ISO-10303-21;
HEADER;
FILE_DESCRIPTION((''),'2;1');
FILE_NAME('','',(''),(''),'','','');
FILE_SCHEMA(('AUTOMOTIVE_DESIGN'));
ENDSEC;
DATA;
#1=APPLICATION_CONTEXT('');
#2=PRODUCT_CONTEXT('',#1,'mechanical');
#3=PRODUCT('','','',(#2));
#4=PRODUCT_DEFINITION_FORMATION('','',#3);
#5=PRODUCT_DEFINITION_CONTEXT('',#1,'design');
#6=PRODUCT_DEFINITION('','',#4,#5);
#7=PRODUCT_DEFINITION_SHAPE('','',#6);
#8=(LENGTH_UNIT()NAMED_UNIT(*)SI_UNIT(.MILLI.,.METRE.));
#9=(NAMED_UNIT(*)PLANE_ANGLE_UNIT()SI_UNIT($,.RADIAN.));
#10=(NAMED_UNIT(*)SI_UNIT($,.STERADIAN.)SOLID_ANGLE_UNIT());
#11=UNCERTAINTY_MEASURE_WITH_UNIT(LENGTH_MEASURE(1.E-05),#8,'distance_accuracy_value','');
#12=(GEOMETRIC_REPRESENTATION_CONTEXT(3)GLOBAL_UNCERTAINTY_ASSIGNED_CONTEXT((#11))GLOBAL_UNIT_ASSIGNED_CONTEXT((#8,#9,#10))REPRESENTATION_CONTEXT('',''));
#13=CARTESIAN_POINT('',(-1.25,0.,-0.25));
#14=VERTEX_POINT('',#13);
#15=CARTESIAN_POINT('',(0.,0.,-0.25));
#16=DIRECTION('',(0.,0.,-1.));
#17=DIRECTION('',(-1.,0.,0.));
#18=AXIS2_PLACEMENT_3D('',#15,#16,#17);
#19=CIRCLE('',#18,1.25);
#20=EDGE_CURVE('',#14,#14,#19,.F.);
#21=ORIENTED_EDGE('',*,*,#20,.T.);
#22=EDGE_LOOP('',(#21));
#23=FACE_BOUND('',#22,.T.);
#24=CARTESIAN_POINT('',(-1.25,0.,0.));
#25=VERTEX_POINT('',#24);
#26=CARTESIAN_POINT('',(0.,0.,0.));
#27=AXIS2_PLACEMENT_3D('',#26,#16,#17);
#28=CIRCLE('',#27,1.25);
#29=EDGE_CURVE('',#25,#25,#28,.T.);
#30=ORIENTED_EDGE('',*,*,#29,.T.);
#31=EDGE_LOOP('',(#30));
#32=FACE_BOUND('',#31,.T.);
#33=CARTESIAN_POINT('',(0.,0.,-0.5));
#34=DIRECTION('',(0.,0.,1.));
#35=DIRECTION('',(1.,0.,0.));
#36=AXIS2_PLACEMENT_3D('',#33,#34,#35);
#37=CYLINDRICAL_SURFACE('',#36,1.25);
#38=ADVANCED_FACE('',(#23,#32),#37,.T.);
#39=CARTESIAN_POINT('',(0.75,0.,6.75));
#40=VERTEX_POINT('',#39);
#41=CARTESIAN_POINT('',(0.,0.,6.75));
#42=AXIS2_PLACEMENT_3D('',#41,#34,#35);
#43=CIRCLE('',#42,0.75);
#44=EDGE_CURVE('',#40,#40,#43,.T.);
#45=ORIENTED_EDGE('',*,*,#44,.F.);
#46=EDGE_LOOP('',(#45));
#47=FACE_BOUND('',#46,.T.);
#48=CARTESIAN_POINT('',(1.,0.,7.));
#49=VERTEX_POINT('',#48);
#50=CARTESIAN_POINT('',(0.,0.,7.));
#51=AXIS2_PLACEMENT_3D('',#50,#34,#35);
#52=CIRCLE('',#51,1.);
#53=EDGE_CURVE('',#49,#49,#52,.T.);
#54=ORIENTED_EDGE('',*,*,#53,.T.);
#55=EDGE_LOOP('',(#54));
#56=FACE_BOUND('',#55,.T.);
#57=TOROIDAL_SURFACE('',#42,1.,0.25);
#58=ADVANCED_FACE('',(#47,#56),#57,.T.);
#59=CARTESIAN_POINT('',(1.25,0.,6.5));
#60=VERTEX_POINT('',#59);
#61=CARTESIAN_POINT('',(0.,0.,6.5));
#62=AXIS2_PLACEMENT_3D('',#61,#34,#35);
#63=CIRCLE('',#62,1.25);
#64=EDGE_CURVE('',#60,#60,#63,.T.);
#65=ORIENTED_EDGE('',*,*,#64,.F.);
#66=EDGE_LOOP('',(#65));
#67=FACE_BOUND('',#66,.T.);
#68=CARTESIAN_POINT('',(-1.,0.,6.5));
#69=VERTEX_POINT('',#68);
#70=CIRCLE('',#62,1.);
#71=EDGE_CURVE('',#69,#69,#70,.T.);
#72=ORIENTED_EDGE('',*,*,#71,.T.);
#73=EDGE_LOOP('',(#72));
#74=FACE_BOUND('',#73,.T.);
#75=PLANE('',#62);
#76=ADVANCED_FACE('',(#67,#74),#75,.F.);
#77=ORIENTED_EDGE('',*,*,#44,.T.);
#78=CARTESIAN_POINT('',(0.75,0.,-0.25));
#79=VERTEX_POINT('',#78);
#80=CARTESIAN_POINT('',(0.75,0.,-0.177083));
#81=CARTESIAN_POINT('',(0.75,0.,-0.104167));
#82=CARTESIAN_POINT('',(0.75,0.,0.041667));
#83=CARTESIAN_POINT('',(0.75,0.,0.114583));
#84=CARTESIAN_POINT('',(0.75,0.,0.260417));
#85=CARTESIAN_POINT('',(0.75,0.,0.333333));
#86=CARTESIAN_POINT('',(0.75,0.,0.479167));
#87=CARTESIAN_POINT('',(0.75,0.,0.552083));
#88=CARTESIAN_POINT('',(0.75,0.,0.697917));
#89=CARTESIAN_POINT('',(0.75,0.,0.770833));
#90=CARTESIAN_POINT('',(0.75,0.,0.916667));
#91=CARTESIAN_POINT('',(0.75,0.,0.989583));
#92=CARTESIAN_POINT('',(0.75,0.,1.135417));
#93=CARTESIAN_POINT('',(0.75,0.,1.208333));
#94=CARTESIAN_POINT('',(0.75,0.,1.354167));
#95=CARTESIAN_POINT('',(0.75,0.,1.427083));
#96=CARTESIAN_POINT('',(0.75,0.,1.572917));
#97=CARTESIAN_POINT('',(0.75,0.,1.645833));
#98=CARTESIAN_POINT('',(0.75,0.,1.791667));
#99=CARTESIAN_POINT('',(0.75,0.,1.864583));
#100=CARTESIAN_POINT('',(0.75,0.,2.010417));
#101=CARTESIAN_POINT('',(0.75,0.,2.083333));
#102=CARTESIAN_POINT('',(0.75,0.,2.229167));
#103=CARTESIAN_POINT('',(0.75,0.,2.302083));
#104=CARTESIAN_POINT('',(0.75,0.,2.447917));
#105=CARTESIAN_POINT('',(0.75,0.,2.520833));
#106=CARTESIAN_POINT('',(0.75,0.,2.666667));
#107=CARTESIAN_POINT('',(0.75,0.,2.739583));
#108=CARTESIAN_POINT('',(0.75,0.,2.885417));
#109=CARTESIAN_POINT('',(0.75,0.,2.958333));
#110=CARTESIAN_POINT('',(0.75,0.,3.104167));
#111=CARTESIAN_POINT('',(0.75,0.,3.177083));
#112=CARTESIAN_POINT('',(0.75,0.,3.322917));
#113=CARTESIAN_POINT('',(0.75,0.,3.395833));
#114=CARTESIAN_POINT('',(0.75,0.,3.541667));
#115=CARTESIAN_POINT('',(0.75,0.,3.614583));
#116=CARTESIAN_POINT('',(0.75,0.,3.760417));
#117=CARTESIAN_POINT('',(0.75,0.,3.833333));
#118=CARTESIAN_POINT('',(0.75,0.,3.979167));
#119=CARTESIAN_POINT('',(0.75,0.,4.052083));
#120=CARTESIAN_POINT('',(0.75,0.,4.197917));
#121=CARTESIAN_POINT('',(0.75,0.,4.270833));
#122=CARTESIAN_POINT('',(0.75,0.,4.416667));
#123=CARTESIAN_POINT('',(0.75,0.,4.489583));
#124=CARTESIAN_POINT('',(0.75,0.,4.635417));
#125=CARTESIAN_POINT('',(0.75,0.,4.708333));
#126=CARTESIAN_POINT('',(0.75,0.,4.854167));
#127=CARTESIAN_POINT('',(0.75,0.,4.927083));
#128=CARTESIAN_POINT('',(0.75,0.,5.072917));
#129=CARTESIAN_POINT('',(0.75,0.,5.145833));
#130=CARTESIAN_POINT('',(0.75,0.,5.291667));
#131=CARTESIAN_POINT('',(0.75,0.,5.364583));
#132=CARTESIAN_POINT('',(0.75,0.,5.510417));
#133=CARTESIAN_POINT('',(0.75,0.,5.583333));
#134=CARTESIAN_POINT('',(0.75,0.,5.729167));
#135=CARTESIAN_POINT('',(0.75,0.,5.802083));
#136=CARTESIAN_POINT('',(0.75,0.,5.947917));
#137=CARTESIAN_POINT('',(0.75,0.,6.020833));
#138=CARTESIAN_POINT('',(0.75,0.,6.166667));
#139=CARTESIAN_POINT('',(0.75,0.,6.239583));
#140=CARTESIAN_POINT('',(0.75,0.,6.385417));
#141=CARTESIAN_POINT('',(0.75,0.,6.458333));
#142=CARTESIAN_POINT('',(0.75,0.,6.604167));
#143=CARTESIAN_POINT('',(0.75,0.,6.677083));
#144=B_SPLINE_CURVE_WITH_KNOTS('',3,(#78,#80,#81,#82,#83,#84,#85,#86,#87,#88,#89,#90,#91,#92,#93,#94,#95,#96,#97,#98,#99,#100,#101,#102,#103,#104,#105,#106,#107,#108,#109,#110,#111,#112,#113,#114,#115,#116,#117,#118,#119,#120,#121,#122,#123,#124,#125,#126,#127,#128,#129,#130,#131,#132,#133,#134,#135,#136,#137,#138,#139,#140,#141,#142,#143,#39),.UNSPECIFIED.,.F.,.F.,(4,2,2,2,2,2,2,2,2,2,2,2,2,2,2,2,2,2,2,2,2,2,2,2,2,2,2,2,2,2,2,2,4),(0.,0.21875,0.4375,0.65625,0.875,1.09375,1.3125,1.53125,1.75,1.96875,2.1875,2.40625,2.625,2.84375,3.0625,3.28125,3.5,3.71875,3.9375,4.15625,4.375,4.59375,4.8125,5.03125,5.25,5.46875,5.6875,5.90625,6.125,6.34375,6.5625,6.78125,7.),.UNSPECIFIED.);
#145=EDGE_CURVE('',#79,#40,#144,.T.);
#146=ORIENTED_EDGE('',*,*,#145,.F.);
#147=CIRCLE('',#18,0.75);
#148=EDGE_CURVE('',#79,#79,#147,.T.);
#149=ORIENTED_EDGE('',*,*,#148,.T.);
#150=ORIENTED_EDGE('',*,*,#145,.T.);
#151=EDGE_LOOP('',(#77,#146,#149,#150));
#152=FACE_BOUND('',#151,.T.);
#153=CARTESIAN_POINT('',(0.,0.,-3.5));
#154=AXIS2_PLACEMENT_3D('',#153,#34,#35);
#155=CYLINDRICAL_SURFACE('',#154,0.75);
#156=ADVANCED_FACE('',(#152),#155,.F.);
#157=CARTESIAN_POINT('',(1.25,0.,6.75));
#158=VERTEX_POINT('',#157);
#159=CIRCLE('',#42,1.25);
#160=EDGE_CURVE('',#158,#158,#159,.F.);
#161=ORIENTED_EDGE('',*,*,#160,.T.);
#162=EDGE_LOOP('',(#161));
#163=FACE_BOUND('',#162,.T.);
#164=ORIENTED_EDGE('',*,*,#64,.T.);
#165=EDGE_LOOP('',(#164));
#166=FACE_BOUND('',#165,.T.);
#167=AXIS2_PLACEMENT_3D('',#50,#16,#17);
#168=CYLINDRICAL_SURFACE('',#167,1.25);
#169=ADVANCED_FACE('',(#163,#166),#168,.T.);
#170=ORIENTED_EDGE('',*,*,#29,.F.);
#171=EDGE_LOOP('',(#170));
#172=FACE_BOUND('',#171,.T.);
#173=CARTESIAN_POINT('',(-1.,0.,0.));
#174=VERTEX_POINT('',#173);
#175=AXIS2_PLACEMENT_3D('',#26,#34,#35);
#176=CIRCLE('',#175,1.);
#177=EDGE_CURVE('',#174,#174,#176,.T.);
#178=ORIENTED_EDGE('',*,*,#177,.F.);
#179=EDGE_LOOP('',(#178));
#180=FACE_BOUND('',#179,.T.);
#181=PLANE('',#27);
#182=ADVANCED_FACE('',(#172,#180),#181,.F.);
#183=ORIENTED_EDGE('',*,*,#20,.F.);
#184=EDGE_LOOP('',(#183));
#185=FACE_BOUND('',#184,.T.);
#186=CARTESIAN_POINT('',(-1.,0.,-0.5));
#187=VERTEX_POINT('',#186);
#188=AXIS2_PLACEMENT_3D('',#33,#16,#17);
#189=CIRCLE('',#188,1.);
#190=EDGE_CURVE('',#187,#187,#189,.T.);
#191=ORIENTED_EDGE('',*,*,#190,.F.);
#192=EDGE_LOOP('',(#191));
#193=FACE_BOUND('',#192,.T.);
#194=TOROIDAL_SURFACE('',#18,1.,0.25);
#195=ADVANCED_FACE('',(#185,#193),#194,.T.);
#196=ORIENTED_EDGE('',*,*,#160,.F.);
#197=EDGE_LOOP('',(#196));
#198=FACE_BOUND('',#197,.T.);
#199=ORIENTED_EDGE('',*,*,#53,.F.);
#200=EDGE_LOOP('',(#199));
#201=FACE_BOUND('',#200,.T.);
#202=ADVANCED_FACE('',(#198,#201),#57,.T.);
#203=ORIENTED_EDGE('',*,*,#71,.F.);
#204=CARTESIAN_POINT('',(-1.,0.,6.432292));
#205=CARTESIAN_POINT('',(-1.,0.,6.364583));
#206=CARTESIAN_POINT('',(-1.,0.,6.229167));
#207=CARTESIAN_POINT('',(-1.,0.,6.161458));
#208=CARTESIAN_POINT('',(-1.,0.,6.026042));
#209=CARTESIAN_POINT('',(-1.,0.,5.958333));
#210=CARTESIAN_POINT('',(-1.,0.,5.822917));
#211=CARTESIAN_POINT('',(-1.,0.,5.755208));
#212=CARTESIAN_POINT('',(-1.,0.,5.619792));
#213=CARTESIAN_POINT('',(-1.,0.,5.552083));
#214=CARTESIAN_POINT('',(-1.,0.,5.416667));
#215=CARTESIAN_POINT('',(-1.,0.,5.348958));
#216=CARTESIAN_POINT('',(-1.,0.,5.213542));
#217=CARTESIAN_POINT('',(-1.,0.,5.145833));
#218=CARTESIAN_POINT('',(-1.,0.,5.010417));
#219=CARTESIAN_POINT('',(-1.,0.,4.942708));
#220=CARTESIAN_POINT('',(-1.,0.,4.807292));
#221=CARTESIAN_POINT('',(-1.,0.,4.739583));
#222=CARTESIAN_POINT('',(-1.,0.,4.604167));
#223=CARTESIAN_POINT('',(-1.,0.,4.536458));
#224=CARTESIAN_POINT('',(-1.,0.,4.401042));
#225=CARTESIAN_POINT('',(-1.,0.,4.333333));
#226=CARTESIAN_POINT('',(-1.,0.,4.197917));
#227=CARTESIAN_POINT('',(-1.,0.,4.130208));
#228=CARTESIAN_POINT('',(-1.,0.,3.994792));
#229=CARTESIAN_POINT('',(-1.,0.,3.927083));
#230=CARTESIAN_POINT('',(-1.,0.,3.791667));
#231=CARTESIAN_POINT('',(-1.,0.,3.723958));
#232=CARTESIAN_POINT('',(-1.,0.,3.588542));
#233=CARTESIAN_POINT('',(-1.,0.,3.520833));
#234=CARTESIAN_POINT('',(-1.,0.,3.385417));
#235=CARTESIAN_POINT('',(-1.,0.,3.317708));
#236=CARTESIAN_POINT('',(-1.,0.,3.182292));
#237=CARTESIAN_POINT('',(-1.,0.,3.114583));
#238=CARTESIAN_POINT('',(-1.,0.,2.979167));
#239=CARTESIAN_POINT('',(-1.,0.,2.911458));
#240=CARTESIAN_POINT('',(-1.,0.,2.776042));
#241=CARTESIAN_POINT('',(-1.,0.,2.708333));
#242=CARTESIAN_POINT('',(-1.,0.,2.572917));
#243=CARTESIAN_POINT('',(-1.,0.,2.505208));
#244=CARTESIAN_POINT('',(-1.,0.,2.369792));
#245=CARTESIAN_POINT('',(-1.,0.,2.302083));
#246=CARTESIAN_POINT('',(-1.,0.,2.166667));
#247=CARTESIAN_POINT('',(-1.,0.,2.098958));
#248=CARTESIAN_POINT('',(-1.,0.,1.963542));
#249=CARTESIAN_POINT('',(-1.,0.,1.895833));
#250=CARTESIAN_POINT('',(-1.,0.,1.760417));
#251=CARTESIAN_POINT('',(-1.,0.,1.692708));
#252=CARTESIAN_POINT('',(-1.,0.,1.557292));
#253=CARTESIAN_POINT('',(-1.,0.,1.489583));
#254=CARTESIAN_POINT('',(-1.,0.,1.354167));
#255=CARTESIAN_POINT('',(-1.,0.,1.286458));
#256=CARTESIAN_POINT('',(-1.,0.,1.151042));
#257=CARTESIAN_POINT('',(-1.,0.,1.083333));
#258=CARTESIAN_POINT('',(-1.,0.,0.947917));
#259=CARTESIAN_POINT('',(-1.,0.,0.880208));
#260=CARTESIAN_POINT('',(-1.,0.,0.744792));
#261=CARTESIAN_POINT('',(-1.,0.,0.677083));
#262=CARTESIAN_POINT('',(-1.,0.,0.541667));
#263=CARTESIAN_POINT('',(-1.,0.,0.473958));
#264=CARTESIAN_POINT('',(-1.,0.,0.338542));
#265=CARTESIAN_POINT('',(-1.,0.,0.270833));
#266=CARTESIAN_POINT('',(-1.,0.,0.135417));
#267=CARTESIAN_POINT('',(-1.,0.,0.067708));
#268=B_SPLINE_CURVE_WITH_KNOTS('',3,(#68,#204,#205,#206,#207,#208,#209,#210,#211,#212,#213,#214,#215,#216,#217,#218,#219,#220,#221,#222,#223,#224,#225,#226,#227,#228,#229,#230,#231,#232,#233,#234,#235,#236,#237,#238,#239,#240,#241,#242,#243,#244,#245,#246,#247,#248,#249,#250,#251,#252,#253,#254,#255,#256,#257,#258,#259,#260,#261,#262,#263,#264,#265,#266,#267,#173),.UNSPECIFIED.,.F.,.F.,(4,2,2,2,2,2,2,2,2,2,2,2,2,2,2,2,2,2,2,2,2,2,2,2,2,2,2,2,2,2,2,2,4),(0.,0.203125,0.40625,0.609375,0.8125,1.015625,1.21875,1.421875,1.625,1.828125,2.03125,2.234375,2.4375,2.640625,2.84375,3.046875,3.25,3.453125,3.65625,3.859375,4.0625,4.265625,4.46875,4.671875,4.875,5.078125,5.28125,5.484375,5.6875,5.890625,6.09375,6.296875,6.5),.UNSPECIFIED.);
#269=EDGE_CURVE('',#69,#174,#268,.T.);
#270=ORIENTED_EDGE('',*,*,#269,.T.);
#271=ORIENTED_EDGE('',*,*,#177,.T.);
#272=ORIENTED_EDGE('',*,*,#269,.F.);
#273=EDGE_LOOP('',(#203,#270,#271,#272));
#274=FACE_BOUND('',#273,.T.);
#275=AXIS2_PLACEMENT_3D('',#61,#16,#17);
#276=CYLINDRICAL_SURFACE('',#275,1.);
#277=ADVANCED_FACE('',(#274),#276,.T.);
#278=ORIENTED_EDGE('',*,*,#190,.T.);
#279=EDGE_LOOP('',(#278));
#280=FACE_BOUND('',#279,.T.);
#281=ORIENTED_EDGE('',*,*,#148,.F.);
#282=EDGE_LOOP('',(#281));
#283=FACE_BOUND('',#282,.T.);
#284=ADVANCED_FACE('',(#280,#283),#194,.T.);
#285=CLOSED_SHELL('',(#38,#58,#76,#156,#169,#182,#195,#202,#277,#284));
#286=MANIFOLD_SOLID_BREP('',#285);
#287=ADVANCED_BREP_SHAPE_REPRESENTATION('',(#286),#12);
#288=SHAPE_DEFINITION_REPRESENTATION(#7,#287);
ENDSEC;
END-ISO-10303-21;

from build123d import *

# Parameters (mm, degrees)
SKETCH1_R           = 1
BOSS_EXTRUDE1_DEPTH = 6.5
SKETCH2_R           = 1.25
BOSS_EXTRUDE2_DEPTH = 0.5
BOSS_EXTRUDE3_START = 0.5
SKETCH3_R           = 1.25
BOSS_EXTRUDE3_DEPTH = 0.5
SKETCH4_R           = 0.75
CUT_EXTRUDE1_DEPTH  = 10.5
FILLET1_R           = 0.25


with BuildPart() as part:
    # Sketch1 → Boss-Extrude1 (new body)
    with BuildSketch(Plane.XY):
        with Locations(Location((0, 0, 0), (0, 0, 180))):
            Circle(SKETCH1_R)
    extrude(amount=BOSS_EXTRUDE1_DEPTH)

    # Sketch2 → Boss-Extrude2 (add)
    with BuildSketch(Plane.XY.offset(6.5)):
        Circle(SKETCH2_R)
    extrude(amount=BOSS_EXTRUDE2_DEPTH)

    # Sketch3 → Boss-Extrude3 (add)
    with BuildSketch(Plane(origin=(0, 0, 0), x_dir=(-1, 0, 0), z_dir=(0, 0, -1)).offset(BOSS_EXTRUDE3_START)):
        with Locations(Location((0, 0, 0), (0, 0, 180))):
            Circle(SKETCH3_R)
    extrude(amount=-BOSS_EXTRUDE3_DEPTH)

    # Sketch4 → Cut-Extrude1 (cut)
    with BuildSketch(Plane.XY.offset(7)):
        Circle(SKETCH4_R)
    extrude(amount=-CUT_EXTRUDE1_DEPTH, mode=Mode.SUBTRACT)

    # Fillet1
    fillet1_edges = [part.edges().sort_by_distance(p)[0] for p in [
        (-1.25, 0, -0.5),
        (-0.75, 0, -0.5),
        (-0.75, 0, 7),
        (-1.25, 0, 7),
    ]]
    fillet(fillet1_edges, radius=FILLET1_R - 0.0001)  # a hair under: the kernel refuses the full size


solid = part.part
